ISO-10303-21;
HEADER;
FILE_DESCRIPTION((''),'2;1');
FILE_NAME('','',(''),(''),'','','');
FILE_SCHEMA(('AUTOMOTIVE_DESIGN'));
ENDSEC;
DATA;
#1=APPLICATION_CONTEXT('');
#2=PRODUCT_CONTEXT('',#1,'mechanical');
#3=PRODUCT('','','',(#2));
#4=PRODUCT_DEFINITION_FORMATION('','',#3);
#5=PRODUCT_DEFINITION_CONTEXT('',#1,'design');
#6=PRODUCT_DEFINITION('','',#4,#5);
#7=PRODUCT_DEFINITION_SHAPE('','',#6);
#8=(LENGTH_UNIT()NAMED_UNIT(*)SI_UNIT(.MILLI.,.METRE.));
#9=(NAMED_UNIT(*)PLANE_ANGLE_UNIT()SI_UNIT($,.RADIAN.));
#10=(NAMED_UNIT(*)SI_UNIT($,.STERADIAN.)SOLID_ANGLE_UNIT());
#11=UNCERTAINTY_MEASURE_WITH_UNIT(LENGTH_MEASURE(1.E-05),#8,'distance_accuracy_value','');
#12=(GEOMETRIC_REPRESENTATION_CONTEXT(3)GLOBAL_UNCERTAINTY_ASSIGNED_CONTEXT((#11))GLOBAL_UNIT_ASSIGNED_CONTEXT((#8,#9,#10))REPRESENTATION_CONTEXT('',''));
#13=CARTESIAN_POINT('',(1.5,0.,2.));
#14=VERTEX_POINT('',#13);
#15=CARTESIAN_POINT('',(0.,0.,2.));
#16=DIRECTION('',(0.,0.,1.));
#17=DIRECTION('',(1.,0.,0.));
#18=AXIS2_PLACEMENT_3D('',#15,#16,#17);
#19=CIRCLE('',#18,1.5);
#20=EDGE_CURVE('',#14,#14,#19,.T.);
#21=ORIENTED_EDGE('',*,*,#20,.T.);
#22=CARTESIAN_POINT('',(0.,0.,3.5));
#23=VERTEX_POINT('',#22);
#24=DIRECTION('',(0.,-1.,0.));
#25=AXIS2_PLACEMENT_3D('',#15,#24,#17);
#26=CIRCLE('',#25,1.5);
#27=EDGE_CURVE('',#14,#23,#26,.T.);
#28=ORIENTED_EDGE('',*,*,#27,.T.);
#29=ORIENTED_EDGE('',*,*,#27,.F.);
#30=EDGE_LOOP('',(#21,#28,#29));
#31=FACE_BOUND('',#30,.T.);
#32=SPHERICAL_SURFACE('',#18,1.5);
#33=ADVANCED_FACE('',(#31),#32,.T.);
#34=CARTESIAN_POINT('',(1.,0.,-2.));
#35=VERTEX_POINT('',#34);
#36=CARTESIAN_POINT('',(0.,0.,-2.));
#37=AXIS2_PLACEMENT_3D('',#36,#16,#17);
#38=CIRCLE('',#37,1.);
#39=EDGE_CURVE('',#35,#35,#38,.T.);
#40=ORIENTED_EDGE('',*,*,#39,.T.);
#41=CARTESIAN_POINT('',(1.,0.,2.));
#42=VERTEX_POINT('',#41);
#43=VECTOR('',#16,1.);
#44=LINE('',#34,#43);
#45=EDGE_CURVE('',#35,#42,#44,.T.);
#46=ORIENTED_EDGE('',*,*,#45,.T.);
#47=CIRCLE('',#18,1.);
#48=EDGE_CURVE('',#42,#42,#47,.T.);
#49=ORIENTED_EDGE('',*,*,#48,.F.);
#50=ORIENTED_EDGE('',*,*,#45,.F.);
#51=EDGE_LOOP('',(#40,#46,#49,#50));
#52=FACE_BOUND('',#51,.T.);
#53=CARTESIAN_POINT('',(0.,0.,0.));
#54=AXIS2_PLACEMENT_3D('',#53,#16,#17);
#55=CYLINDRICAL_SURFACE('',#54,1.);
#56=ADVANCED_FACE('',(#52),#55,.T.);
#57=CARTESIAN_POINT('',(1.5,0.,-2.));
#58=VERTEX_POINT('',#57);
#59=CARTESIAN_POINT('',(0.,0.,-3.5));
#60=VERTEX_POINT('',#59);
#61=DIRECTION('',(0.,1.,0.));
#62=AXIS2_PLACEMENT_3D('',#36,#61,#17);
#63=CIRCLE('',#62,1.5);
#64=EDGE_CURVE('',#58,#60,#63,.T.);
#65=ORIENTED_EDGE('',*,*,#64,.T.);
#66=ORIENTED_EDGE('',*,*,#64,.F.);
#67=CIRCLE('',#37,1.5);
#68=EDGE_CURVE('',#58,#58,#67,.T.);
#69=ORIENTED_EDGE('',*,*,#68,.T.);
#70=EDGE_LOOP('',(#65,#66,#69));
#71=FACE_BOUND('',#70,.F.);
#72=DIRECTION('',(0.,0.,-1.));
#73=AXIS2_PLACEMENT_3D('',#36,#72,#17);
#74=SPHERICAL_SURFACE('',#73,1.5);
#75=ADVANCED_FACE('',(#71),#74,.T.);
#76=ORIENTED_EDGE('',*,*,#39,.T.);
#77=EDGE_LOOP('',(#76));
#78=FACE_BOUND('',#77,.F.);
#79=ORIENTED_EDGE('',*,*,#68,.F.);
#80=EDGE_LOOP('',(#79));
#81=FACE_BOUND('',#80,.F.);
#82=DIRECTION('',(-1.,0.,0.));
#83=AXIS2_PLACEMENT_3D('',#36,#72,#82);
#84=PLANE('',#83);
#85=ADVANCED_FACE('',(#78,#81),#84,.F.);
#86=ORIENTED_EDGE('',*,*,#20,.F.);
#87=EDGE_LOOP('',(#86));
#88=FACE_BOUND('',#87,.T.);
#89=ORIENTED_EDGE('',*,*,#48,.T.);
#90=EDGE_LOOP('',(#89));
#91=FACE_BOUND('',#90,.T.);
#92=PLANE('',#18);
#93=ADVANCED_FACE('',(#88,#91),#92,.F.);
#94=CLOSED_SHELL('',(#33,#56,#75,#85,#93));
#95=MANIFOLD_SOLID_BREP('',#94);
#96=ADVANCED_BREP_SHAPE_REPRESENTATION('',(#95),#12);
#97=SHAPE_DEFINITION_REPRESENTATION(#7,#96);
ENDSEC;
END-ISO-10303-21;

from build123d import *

# Parameters (mm, degrees)
F0_R     = 1
F1_DEPTH = 2


# Not quite as in the source:
# - a pattern or mirror of a feature is missing from the dataset's text; its kind, count and spacing are read off the source's solid


with BuildPart() as f1:
    # F0 (on Top) → F1 (new body, symmetric)
    with BuildSketch(Plane.XY):
        Circle(F0_R)
    extrude(amount=F1_DEPTH, both=True)

    # F2 (on Front) → F3 (revolve)
    with BuildSketch(Plane.XZ):
        with BuildLine():
            Line((0, 2), (1.5, 2))
            ThreePointArc((1.5, 2), (1.0606601718, 3.0606601718), (0, 3.5))
            Line((0, 3.5), (0, 2))
        make_face()
    f3 = revolve(axis=Axis((0, 0, 2.75), (0, 0, 1)))

    # F3_copies: F3 across plane
    add(f3.mirror(Plane(origin=(0, 0, 0), x_dir=(-1, 0, 0), z_dir=(0, 0, -1))))


solid = f1.part
